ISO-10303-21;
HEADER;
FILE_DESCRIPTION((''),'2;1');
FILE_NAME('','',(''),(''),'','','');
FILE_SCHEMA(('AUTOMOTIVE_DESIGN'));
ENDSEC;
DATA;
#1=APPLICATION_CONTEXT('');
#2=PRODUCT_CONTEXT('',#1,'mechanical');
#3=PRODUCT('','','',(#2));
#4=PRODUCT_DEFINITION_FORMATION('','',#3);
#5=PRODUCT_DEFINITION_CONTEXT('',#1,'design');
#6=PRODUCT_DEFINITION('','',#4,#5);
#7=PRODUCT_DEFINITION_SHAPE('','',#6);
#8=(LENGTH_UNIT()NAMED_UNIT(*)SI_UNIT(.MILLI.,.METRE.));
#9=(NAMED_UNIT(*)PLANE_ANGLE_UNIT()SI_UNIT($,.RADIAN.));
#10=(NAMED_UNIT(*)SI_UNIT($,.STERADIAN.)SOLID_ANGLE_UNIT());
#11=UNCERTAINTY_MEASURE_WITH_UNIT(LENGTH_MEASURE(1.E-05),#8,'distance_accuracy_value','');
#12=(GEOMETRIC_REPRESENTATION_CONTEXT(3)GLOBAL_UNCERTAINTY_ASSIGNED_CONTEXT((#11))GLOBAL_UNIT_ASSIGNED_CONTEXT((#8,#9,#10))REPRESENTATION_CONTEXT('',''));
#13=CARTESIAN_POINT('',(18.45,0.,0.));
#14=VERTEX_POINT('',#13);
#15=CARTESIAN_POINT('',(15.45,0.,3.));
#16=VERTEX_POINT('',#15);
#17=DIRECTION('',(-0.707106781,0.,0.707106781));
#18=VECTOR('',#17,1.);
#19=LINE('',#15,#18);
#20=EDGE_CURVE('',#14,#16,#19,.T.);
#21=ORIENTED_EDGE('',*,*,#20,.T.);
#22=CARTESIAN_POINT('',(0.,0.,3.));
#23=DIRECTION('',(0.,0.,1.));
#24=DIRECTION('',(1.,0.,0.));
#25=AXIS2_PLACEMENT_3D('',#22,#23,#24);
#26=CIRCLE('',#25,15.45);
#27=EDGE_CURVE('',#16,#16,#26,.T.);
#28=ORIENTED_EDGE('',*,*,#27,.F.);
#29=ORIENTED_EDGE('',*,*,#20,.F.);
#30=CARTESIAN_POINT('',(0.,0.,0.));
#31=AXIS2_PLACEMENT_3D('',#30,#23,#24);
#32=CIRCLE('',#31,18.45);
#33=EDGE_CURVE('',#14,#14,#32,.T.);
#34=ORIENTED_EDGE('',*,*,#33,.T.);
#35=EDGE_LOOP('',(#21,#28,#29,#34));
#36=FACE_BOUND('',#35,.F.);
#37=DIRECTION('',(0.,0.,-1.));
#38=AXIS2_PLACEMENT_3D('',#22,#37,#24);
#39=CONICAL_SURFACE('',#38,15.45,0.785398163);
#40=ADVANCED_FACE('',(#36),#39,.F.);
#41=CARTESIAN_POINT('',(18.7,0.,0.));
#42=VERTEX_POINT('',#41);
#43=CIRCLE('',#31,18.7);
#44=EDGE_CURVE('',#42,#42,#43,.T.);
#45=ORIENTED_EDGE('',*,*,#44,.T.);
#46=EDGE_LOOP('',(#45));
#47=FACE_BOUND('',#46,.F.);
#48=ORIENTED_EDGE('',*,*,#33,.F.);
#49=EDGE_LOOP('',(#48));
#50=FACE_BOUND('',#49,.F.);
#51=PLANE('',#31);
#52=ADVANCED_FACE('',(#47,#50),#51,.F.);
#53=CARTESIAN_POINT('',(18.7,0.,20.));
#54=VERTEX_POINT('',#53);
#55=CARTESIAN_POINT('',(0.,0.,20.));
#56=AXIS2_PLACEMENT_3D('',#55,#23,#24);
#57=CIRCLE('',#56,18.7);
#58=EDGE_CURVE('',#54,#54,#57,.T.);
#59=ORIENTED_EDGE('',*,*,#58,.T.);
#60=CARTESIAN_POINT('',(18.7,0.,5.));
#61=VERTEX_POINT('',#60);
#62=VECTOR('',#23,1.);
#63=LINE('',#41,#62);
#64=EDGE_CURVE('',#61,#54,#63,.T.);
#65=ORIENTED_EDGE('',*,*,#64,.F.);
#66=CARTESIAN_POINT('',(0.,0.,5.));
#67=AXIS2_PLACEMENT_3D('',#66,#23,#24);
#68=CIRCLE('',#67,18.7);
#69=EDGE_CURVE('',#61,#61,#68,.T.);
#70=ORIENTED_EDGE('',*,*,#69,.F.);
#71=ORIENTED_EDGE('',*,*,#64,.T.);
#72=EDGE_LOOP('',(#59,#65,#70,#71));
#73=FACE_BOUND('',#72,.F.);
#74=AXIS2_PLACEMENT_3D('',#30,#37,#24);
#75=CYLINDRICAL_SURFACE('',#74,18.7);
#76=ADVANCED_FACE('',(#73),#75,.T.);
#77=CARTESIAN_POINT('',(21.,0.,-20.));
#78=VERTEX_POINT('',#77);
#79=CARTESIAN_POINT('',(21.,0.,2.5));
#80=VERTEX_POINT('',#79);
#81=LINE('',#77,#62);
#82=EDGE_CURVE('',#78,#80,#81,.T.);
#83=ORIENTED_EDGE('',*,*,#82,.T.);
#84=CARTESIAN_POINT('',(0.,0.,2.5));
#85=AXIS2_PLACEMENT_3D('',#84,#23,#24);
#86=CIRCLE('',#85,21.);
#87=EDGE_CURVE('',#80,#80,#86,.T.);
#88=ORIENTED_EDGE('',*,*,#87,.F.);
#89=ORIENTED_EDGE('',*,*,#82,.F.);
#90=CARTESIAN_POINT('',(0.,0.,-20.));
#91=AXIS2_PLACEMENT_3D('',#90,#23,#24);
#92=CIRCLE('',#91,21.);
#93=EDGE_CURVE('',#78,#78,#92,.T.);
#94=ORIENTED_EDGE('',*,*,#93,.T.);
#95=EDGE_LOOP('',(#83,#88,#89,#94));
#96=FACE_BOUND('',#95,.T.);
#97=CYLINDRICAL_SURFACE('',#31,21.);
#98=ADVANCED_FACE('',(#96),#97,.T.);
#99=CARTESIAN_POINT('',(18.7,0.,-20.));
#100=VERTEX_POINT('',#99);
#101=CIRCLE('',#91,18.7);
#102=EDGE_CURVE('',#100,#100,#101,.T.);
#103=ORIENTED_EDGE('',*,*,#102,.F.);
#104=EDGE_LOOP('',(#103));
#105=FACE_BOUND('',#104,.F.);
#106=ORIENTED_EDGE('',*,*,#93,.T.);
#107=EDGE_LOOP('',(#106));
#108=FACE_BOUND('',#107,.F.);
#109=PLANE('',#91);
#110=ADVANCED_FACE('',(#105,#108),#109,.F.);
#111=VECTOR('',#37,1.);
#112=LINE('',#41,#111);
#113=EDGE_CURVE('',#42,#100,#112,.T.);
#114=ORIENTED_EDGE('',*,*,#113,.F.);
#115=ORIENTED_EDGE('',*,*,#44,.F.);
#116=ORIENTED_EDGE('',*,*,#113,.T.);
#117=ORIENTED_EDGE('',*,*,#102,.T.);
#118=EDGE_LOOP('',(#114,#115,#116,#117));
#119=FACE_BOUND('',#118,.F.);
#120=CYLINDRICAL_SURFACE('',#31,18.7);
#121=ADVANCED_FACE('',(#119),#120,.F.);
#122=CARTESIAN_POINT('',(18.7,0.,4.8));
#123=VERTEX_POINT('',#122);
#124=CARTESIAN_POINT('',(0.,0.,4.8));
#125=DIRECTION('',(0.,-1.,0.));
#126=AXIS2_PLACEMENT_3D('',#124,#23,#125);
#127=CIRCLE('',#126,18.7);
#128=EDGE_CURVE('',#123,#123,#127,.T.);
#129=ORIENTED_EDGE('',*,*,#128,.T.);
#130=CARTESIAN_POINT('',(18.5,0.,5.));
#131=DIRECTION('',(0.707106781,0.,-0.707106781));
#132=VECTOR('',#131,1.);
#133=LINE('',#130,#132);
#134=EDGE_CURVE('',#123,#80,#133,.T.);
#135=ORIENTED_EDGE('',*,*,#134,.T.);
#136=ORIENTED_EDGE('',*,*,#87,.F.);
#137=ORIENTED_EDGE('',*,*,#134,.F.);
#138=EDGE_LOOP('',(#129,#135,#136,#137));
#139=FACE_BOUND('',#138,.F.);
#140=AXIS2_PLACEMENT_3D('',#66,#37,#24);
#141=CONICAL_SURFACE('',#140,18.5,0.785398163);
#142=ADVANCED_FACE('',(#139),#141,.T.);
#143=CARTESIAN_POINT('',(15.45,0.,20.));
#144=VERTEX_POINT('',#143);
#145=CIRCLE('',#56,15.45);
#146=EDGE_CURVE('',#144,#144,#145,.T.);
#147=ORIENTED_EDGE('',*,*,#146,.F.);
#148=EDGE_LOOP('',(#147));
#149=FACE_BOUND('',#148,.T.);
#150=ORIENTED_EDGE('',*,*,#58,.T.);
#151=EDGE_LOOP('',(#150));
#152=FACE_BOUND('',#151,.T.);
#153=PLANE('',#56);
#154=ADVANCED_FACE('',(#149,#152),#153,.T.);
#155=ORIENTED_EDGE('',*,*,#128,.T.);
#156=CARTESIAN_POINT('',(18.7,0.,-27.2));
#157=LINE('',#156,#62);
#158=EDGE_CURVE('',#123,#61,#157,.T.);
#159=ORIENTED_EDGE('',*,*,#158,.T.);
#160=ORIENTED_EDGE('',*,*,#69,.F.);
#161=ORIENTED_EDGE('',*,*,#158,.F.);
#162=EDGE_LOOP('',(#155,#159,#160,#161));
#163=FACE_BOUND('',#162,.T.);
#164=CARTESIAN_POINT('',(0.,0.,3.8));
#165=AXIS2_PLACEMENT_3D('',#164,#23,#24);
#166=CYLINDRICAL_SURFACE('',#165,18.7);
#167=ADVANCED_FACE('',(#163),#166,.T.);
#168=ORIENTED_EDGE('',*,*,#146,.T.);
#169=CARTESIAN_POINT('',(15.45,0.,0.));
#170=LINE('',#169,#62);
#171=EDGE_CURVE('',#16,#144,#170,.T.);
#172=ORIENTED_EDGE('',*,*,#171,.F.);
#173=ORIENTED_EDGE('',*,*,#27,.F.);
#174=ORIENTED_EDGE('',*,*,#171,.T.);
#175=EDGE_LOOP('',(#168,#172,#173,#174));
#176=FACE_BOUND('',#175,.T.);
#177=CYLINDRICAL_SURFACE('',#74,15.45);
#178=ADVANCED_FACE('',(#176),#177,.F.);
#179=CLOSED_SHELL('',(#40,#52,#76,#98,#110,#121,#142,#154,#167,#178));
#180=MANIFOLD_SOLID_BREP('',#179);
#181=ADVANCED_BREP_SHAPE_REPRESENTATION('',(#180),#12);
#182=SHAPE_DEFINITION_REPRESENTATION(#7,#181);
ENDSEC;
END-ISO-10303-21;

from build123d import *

# Parameters (mm, degrees)
F0_R        = 18.7
F0_R_2      = 15.45
F1_DEPTH    = 20
F0_R_3      = 21
F2_DEPTH    = 5
F3_DEPTH    = 20
F4_S5_R     = 18.7
F4_T6_DEPTH = 31
F5_SIZE     = 3


# Not quite as in the source:
# - a fillet or chamfer that OpenCascade refuses, or shapes differently, is made with other operations: its cross-section is extruded or revolved along the edge and cut away or added


with BuildPart() as f1:
    # F0 (on Top) → F1 (new body)
    with BuildSketch(Plane.XY):
        Circle(F0_R)
        Circle(F0_R_2, mode=Mode.SUBTRACT)
    extrude(amount=F1_DEPTH)

    # F0 (on Top) → F2 (join)
    with BuildSketch(Plane.XY):
        Circle(F0_R_3)
        Circle(F0_R, mode=Mode.SUBTRACT)
    extrude(amount=F2_DEPTH)

    # F0 (on Top) → F3 (join)
    with BuildSketch(Plane.XY):
        Circle(F0_R_3)
        Circle(F0_R, mode=Mode.SUBTRACT)
    extrude(amount=-F3_DEPTH)

    # F4: chamfer of 2.5 on 1 edges, made by hand


with BuildPart() as f4_tool2:
    # F4_s3 → F4_t4 (revolve)
    with BuildSketch(Plane.XZ):
        Polygon((18.5, 5), (21, 2.5), (21, 5), align=None)
    revolve(axis=Axis((0, 0, 5), (0, 0, 1)))

    # F4_s5 → F4_t6 (cut, symmetric)
    with BuildSketch(Plane.XY.offset(3.8)):
        Circle(F4_S5_R)
    extrude(amount=F4_T6_DEPTH, both=True, mode=Mode.SUBTRACT)


with BuildPart() as f1_1:
    add(f1.part)

    # F4_t1: cut F4_tool2
    add(f4_tool2.part, mode=Mode.SUBTRACT)

    # F5
    f5_edges = [f1_1.edges().sort_by_distance(p)[0] for p in [
        (-15.45, 0, 0),
    ]]
    chamfer(f5_edges, length=F5_SIZE)


solid = f1_1.part
